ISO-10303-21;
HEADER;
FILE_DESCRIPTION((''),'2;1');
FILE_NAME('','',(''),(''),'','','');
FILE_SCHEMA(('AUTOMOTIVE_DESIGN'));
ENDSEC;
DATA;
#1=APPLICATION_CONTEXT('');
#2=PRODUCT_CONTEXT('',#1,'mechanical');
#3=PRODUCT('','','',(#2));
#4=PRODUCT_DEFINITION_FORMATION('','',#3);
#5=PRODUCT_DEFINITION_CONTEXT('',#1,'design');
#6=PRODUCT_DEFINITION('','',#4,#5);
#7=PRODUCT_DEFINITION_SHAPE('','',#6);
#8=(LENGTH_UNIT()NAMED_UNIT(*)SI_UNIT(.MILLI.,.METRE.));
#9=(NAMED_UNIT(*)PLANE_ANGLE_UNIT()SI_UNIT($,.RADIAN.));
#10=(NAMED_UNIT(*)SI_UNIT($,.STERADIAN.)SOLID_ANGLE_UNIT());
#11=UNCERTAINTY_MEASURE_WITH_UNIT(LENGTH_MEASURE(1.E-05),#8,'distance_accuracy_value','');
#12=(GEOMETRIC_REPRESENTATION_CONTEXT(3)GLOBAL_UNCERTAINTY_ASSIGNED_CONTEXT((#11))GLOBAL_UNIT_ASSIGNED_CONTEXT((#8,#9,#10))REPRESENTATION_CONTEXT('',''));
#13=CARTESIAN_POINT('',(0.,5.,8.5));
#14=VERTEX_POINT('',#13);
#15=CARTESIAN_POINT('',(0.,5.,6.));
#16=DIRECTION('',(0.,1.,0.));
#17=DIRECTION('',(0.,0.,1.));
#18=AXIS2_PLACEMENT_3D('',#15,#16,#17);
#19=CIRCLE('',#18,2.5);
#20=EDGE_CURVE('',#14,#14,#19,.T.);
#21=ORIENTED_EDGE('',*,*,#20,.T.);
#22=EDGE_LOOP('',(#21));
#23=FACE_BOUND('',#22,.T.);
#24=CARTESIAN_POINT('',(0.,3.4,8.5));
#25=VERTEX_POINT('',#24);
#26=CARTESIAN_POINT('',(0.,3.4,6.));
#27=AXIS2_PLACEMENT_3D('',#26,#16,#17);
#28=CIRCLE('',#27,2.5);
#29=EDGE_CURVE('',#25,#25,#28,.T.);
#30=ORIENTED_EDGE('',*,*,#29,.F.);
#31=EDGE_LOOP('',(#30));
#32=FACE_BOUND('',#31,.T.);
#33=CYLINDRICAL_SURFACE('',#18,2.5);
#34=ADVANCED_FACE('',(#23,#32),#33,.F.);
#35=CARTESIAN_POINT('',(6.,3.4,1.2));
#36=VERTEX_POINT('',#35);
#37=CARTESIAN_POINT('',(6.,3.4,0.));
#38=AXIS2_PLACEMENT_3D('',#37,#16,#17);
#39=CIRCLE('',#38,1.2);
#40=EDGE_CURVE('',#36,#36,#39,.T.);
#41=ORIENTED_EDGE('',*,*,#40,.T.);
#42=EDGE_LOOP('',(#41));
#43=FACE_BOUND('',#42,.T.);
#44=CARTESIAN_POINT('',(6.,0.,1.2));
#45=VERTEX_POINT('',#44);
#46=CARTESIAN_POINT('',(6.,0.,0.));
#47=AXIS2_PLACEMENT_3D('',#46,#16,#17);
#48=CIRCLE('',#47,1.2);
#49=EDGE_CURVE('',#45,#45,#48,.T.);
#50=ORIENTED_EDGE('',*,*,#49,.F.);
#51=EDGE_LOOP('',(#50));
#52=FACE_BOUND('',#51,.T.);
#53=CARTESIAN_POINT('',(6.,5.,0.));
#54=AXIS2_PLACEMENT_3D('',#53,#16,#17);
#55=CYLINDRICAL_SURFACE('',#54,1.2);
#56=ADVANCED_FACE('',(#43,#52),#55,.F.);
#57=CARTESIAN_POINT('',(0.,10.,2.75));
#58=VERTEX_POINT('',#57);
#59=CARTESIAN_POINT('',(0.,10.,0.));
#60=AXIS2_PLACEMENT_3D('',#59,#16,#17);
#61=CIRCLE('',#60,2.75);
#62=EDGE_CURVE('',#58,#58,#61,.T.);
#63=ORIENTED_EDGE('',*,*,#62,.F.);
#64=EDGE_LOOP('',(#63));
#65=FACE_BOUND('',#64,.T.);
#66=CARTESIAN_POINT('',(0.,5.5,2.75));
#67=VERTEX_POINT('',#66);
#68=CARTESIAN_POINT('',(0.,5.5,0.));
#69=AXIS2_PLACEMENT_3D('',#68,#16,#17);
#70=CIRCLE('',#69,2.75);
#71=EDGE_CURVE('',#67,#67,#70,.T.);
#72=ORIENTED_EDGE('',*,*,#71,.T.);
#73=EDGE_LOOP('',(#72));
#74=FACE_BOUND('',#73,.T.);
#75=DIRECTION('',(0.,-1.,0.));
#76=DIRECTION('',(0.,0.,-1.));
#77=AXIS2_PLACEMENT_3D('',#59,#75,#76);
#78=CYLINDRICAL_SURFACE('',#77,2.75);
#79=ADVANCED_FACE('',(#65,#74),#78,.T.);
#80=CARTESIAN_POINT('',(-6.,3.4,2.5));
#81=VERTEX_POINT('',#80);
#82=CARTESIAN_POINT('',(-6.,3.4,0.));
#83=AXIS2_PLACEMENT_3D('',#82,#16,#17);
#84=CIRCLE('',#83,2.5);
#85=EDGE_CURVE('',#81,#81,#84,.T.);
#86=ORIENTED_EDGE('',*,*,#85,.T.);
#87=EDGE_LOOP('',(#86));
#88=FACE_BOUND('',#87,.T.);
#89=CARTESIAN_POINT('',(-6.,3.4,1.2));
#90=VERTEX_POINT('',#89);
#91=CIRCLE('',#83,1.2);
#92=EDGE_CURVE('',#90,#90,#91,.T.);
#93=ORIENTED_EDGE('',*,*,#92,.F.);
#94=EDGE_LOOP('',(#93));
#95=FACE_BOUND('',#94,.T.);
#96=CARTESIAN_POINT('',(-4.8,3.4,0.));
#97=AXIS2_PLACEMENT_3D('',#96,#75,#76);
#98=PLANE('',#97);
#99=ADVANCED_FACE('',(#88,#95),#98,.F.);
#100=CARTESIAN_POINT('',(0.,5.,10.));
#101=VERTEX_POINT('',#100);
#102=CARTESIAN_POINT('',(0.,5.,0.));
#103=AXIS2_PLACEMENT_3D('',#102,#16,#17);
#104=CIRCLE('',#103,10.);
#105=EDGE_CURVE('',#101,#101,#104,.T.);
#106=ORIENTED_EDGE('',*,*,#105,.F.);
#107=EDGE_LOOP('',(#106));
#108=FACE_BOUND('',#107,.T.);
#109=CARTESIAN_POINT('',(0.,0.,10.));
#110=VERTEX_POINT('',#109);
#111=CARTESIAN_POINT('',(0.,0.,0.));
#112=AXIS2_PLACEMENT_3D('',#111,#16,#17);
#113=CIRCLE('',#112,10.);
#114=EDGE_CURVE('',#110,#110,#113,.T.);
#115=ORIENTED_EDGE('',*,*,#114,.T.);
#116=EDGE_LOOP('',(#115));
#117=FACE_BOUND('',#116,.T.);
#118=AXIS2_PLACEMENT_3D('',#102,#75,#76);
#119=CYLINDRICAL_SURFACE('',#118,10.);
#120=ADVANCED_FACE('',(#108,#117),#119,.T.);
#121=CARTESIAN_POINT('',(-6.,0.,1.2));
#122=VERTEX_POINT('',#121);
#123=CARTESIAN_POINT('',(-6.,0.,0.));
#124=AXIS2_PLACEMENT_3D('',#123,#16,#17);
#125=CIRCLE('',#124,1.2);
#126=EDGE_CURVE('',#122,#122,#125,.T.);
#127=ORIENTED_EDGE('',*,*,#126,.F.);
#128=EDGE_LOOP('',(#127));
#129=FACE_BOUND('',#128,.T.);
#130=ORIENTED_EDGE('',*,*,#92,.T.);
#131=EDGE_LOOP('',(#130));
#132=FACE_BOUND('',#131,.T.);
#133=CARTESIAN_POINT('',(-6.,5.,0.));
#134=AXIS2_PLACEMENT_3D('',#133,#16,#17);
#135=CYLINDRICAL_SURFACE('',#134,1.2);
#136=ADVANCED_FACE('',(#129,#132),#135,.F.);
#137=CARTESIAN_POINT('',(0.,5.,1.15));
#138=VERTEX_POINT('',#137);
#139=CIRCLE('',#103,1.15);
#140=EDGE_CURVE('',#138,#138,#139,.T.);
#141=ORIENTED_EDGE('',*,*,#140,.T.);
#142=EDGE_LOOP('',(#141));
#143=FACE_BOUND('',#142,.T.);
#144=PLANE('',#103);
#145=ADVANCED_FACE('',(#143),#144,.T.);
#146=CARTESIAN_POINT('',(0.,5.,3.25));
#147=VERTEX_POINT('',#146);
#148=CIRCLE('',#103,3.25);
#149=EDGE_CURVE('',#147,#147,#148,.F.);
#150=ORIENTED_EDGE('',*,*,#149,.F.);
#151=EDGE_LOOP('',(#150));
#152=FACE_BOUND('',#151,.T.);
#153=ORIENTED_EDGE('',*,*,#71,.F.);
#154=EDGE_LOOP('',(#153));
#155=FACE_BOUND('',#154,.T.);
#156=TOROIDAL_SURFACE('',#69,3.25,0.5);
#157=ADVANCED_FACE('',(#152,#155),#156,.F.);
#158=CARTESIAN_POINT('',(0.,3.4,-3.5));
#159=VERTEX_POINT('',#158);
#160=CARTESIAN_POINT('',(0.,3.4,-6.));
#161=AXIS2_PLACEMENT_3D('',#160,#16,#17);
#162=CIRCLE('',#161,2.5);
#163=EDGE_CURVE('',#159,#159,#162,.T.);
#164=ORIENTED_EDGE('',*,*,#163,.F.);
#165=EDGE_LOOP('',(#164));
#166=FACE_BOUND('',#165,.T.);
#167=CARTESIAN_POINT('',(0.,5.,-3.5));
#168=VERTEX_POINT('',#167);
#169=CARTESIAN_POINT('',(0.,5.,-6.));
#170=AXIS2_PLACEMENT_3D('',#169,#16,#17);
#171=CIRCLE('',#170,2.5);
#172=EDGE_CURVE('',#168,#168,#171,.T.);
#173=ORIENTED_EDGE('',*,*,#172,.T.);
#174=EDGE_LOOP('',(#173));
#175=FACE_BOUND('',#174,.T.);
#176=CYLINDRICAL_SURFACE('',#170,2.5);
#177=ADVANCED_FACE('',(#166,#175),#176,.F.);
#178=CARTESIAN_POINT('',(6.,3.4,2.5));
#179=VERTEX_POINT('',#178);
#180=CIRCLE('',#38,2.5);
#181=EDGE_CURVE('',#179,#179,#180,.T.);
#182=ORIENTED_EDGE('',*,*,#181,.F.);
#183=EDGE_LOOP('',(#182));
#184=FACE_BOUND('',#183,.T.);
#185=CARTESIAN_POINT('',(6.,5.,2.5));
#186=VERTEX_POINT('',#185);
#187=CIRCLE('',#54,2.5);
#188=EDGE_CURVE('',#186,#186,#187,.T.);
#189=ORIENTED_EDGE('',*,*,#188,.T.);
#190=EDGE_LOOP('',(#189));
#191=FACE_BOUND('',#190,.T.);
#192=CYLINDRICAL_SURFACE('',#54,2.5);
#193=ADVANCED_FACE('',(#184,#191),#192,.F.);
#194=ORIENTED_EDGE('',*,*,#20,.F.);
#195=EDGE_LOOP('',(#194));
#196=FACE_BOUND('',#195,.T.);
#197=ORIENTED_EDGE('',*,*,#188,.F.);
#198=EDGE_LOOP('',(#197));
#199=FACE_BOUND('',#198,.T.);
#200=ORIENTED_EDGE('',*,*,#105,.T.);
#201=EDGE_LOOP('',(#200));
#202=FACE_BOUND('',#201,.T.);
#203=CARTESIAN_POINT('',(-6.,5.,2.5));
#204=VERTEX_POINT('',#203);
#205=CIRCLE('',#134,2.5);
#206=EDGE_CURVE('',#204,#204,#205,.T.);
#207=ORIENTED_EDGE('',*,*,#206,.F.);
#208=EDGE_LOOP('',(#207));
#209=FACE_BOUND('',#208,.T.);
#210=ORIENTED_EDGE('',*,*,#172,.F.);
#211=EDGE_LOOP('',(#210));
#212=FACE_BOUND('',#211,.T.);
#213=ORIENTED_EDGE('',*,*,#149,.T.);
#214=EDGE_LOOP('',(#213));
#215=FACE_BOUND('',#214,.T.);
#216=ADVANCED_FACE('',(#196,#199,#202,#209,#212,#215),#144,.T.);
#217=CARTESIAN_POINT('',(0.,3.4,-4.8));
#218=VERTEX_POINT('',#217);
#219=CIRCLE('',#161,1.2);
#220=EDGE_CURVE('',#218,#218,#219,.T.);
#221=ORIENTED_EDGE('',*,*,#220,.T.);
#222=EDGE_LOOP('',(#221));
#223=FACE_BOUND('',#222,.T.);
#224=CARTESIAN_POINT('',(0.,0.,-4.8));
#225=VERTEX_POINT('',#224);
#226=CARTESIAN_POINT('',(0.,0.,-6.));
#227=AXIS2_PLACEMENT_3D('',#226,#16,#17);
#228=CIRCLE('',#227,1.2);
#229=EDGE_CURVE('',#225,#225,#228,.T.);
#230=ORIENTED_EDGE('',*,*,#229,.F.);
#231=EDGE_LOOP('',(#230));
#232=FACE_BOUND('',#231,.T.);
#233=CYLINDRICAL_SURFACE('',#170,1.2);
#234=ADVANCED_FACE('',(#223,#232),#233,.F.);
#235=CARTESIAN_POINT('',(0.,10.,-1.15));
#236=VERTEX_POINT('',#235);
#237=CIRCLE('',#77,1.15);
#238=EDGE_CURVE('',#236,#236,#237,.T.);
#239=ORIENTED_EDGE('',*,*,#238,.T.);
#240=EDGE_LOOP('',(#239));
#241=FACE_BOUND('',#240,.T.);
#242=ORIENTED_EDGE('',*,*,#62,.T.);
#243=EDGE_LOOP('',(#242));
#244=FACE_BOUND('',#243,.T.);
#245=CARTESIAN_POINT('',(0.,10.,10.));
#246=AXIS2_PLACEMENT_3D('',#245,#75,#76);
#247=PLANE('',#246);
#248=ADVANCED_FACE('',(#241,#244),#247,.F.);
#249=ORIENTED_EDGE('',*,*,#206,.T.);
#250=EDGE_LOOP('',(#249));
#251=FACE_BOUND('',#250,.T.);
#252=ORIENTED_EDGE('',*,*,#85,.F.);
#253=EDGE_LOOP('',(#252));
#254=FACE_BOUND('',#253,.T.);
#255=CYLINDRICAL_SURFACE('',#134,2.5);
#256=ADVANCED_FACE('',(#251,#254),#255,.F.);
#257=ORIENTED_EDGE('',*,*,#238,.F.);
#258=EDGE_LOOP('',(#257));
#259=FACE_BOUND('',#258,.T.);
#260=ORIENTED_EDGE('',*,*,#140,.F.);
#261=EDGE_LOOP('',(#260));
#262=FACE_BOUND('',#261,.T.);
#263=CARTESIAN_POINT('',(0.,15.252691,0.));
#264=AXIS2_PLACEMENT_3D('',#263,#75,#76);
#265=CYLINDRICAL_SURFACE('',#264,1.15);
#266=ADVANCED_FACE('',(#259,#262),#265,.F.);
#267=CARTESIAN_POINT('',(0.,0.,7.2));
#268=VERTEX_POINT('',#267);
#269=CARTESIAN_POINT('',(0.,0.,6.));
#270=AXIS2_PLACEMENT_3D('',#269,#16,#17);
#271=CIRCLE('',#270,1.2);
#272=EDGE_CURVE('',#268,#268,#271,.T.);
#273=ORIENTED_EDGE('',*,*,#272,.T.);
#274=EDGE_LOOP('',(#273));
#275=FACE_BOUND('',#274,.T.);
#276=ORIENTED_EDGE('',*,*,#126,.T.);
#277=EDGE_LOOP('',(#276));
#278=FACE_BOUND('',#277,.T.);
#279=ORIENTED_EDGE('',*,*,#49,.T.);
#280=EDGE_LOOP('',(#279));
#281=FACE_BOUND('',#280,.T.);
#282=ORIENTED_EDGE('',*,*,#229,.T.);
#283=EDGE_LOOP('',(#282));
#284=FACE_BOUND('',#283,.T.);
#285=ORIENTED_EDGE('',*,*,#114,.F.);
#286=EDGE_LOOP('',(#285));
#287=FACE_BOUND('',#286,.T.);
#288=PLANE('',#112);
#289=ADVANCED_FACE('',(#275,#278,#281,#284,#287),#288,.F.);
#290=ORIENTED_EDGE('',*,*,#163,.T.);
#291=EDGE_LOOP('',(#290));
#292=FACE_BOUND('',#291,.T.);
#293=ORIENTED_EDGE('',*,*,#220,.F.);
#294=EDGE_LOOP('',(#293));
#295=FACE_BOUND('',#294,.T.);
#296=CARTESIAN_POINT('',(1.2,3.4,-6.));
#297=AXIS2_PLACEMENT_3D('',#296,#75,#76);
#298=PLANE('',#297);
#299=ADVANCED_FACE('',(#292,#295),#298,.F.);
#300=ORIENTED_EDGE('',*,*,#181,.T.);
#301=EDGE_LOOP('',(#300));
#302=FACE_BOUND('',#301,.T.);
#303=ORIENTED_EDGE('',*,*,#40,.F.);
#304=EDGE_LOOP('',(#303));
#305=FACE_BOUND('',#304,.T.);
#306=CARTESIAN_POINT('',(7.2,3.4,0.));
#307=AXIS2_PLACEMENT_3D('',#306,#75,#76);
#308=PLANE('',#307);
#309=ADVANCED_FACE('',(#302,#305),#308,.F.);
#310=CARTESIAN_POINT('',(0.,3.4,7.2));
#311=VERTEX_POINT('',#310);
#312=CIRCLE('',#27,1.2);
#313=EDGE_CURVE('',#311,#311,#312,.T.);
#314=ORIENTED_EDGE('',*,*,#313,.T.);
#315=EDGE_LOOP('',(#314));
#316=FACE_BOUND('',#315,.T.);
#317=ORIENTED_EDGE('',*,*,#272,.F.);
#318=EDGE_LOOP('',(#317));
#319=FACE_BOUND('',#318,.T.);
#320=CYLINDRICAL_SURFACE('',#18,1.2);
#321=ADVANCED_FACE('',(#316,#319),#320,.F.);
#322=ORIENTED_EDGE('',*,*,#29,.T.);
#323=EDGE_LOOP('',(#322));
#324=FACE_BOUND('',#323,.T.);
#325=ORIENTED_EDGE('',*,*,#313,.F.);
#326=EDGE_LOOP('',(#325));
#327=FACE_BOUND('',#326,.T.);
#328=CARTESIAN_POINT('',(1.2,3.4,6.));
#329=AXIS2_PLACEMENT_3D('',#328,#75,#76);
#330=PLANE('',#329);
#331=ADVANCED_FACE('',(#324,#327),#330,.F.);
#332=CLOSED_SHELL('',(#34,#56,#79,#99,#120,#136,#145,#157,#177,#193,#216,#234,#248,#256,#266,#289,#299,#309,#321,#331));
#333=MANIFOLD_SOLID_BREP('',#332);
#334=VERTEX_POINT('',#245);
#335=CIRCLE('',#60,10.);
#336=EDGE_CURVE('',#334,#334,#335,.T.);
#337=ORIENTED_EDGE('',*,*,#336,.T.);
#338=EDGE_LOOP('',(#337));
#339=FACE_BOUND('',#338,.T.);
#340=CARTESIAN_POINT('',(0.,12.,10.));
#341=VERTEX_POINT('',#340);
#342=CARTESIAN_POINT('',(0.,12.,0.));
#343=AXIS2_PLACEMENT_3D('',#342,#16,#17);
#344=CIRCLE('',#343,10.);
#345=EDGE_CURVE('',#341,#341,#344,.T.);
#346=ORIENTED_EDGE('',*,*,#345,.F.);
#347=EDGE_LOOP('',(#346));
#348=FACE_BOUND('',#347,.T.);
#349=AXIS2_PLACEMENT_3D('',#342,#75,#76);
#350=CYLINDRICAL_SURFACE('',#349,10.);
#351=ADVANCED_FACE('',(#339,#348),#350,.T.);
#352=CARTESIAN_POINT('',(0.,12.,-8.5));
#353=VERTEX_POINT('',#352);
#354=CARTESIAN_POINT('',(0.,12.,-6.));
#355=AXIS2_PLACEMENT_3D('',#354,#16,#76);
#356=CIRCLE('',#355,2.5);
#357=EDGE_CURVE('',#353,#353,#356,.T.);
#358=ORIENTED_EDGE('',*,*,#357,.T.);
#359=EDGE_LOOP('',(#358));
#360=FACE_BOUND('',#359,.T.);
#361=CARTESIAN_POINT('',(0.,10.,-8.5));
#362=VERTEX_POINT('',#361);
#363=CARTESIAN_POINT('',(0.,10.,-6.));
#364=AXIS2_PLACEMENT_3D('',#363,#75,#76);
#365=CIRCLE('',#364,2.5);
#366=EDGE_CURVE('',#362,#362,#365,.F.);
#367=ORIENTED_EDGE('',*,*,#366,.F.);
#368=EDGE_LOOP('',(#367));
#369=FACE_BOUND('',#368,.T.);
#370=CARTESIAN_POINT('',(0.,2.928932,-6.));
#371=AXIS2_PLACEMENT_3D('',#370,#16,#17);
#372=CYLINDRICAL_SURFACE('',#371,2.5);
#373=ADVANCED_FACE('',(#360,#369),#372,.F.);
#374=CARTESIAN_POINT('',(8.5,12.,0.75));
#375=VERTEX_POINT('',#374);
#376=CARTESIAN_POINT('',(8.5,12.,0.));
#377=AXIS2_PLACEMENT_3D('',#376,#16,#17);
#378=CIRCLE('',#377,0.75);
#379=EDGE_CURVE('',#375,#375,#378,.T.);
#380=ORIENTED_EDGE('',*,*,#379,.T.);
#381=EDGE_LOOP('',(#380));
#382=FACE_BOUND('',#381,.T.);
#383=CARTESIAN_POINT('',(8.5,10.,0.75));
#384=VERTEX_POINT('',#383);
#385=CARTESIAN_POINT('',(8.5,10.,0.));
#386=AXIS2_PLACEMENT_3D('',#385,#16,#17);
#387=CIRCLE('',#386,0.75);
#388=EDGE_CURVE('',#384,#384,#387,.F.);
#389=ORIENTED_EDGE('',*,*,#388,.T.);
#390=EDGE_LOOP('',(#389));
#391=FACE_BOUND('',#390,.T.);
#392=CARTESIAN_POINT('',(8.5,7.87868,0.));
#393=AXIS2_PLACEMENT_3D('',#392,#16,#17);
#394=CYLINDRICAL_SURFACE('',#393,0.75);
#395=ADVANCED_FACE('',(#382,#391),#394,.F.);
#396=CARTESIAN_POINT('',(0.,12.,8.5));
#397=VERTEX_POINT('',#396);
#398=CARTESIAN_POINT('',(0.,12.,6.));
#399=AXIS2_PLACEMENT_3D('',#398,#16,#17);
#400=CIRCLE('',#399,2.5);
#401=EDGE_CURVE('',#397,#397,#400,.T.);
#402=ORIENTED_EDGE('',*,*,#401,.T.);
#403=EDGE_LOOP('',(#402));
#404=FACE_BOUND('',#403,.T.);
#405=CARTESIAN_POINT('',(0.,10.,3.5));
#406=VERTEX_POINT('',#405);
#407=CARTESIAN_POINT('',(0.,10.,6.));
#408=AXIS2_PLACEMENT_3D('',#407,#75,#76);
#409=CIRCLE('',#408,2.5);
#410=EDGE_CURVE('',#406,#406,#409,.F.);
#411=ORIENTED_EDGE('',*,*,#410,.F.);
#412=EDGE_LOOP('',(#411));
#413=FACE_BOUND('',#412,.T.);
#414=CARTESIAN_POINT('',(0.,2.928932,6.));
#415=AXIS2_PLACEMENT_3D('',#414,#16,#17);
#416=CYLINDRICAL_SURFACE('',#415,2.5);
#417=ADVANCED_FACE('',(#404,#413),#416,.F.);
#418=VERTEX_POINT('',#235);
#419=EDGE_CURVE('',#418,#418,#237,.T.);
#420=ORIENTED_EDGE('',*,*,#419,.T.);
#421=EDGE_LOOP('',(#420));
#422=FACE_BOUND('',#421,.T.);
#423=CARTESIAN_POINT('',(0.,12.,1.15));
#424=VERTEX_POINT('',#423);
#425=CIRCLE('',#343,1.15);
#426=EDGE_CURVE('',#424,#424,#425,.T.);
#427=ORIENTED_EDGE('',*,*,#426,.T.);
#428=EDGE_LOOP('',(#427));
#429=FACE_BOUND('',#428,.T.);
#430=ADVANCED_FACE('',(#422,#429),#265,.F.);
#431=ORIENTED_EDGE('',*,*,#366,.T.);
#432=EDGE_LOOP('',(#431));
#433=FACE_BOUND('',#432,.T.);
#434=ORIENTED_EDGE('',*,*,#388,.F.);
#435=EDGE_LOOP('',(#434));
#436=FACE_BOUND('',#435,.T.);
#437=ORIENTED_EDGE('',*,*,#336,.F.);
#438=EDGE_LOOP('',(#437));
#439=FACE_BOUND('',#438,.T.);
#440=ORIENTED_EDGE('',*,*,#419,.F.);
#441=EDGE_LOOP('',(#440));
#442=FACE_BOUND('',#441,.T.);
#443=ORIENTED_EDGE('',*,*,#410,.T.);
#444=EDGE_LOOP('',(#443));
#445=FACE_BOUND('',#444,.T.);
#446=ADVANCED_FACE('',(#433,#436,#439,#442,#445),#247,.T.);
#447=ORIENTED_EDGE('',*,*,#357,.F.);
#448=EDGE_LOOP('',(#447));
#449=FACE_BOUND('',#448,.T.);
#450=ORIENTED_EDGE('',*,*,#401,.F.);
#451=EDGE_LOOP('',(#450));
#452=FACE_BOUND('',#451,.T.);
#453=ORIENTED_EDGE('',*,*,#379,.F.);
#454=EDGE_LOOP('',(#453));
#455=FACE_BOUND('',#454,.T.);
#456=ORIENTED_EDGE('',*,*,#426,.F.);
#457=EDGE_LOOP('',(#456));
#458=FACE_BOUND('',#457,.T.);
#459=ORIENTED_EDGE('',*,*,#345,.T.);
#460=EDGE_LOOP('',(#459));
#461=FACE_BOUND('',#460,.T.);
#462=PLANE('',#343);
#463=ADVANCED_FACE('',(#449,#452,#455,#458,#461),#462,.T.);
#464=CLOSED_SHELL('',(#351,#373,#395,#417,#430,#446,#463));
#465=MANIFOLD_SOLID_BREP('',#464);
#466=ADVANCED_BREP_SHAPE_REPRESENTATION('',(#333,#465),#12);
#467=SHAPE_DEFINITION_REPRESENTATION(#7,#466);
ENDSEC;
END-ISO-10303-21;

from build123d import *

# Parameters (mm, degrees)
SKETCH1_R                                = 10
BOTTOM_DEPTH                             = 5
CBORE_FOR_M2_PAN_HEAD_SCREW1_D           = 2.4
CBORE_FOR_M2_PAN_HEAD_SCREW1_CBORE_D     = 5
CBORE_FOR_M2_PAN_HEAD_SCREW1_CBORE_DEPTH = 1.6
SKETCH4_R                                = 2.75
GROOVE_DEPTH                             = 5
CIRPATTERN1_COUNT                        = 4
SKETCH7_R                                = 10
TOP_DEPTH                                = 2
SKETCH8_R                                = 0.75
THREAD_TERMINAL_DEPTH                    = 2
SKETCH9_R                                = 1.15
M2_PIN_INSERT_DEPTH                      = 7
FILLET1_R                                = 0.5
SPLIT1_START                             = 10
SPLIT1_OUTLINE_R                         = 10
SPLIT1_OUTLINE_R_2                       = 1.15
SPLIT1_OUTLINE_R_3                       = 0.75
SPLIT1_DEPTH                             = 2
SPLIT1_2_OUTLINE_R                       = 10
SPLIT1_2_OUTLINE_R_2                     = 1.15
SPLIT1_2_OUTLINE_R_3                     = 0.75
SPLIT1_2_DEPTH                           = 2
SKETCH10_R                               = 2.5
CUT_EXTRUDE1_DEPTH                       = 2
HOLES_FOR_SCREWDRIVERS_COUNT             = 2


# Read off the part's stored shape, not the designer's step: Split1
with BuildPart() as part:
    # Sketch1 → bottom (new body)
    with BuildSketch(Plane(origin=(0, 0, 0), x_dir=(1, 0, 0), z_dir=(0, 1, 0))):
        with Locations(Location((0, 0, 0), (0, 0, 270))):
            Circle(SKETCH1_R)
    extrude(amount=BOTTOM_DEPTH)

    # CBORE for M2 Pan Head Screw1 (through all)
    with Locations(Plane(origin=(0, 5, 0), x_dir=(1, 0, 0), z_dir=(0, 1, 0))):
        with Locations((6, 0)):
            cbore_for_m2_pan_head_screw1 = CounterBoreHole(CBORE_FOR_M2_PAN_HEAD_SCREW1_D / 2, CBORE_FOR_M2_PAN_HEAD_SCREW1_CBORE_D / 2, CBORE_FOR_M2_PAN_HEAD_SCREW1_CBORE_DEPTH)

    # Sketch4 → groove (add)
    with BuildSketch(Plane(origin=(0, 5, 0), x_dir=(1, 0, 0), z_dir=(0, 1, 0))):
        with Locations(Location((0, 0, 0), (0, 0, 270))):
            Circle(SKETCH4_R)
    extrude(amount=GROOVE_DEPTH)

    # CirPattern1: CBORE for M2 Pan Head Screw1 ×4 about axis
    cirpattern1_axis = Axis((0, 0, 0), (0, 1, 0))
    for i in range(1, CIRPATTERN1_COUNT):
        add(cbore_for_m2_pan_head_screw1.rotate(cirpattern1_axis, i * 360 / CIRPATTERN1_COUNT), mode=Mode.SUBTRACT)

    # Sketch7 → top (add)
    with BuildSketch(Plane(origin=(0, 10, 0), x_dir=(1, 0, 0), z_dir=(0, 1, 0))):
        with Locations(Location((0, 0, 0), (0, 0, 270))):
            Circle(SKETCH7_R)
    extrude(amount=TOP_DEPTH)

    # Sketch8 → thread_terminal (cut)
    with BuildSketch(Plane(origin=(0, 12, 0), x_dir=(1, 0, 0), z_dir=(0, 1, 0))):
        with Locations(Location((8.5, 0, 0), (0, 0, 270))):
            Circle(SKETCH8_R)
    extrude(amount=-THREAD_TERMINAL_DEPTH, mode=Mode.SUBTRACT)

    # Sketch9 → M2 pin_insert (cut)
    with BuildSketch(Plane(origin=(0, 5, 0), x_dir=(1, 0, 0), z_dir=(0, 1, 0))):
        with Locations(Location((0, 0, 0), (0, 0, 270))):
            Circle(SKETCH9_R)
    extrude(amount=M2_PIN_INSERT_DEPTH, mode=Mode.SUBTRACT)

    # Fillet1
    fillet1_edges = [part.edges().sort_by_distance(p)[0] for p in [
        (0, 5, -2.75),
    ]]
    fillet(fillet1_edges, radius=FILLET1_R)

    # Split1 2 outline → Split1 2 (cut)
    with BuildSketch(Plane(origin=(0, 0, 0), x_dir=(1, 0, 0), z_dir=(0, 1, 0)).offset(SPLIT1_START)):
        Circle(SPLIT1_2_OUTLINE_R)
        Circle(SPLIT1_2_OUTLINE_R_2, mode=Mode.SUBTRACT)
        with Locations((8.5, 0)):
            Circle(SPLIT1_2_OUTLINE_R_3, mode=Mode.SUBTRACT)
    extrude(amount=SPLIT1_2_DEPTH, mode=Mode.SUBTRACT)


with BuildPart() as body_2:
    # Split1 outline → Split1 (new body)
    with BuildSketch(Plane(origin=(0, 0, 0), x_dir=(1, 0, 0), z_dir=(0, 1, 0)).offset(SPLIT1_START)):
        Circle(SPLIT1_OUTLINE_R)
        Circle(SPLIT1_OUTLINE_R_2, mode=Mode.SUBTRACT)
        with Locations((8.5, 0)):
            Circle(SPLIT1_OUTLINE_R_3, mode=Mode.SUBTRACT)
    extrude(amount=SPLIT1_DEPTH)

    # Sketch10 → Cut-Extrude1 (cut)
    with BuildSketch(Plane(origin=(0, 12, 0), x_dir=(1, 0, 0), z_dir=(0, 1, 0))):
        with Locations(Location((0, -6, 0), (0, 0, 270))):
            Circle(SKETCH10_R)
    cut_extrude1 = extrude(amount=-CUT_EXTRUDE1_DEPTH, mode=Mode.SUBTRACT)

    # holes_for_screwdrivers: Cut-Extrude1 ×2 about axis
    holes_for_screwdrivers_axis = Axis((0, 0, 0), (0, 1, 0))
    for i in range(1, HOLES_FOR_SCREWDRIVERS_COUNT):
        add(cut_extrude1.rotate(holes_for_screwdrivers_axis, i * 360 / HOLES_FOR_SCREWDRIVERS_COUNT), mode=Mode.SUBTRACT)


solid = Compound([part.part, body_2.part])
